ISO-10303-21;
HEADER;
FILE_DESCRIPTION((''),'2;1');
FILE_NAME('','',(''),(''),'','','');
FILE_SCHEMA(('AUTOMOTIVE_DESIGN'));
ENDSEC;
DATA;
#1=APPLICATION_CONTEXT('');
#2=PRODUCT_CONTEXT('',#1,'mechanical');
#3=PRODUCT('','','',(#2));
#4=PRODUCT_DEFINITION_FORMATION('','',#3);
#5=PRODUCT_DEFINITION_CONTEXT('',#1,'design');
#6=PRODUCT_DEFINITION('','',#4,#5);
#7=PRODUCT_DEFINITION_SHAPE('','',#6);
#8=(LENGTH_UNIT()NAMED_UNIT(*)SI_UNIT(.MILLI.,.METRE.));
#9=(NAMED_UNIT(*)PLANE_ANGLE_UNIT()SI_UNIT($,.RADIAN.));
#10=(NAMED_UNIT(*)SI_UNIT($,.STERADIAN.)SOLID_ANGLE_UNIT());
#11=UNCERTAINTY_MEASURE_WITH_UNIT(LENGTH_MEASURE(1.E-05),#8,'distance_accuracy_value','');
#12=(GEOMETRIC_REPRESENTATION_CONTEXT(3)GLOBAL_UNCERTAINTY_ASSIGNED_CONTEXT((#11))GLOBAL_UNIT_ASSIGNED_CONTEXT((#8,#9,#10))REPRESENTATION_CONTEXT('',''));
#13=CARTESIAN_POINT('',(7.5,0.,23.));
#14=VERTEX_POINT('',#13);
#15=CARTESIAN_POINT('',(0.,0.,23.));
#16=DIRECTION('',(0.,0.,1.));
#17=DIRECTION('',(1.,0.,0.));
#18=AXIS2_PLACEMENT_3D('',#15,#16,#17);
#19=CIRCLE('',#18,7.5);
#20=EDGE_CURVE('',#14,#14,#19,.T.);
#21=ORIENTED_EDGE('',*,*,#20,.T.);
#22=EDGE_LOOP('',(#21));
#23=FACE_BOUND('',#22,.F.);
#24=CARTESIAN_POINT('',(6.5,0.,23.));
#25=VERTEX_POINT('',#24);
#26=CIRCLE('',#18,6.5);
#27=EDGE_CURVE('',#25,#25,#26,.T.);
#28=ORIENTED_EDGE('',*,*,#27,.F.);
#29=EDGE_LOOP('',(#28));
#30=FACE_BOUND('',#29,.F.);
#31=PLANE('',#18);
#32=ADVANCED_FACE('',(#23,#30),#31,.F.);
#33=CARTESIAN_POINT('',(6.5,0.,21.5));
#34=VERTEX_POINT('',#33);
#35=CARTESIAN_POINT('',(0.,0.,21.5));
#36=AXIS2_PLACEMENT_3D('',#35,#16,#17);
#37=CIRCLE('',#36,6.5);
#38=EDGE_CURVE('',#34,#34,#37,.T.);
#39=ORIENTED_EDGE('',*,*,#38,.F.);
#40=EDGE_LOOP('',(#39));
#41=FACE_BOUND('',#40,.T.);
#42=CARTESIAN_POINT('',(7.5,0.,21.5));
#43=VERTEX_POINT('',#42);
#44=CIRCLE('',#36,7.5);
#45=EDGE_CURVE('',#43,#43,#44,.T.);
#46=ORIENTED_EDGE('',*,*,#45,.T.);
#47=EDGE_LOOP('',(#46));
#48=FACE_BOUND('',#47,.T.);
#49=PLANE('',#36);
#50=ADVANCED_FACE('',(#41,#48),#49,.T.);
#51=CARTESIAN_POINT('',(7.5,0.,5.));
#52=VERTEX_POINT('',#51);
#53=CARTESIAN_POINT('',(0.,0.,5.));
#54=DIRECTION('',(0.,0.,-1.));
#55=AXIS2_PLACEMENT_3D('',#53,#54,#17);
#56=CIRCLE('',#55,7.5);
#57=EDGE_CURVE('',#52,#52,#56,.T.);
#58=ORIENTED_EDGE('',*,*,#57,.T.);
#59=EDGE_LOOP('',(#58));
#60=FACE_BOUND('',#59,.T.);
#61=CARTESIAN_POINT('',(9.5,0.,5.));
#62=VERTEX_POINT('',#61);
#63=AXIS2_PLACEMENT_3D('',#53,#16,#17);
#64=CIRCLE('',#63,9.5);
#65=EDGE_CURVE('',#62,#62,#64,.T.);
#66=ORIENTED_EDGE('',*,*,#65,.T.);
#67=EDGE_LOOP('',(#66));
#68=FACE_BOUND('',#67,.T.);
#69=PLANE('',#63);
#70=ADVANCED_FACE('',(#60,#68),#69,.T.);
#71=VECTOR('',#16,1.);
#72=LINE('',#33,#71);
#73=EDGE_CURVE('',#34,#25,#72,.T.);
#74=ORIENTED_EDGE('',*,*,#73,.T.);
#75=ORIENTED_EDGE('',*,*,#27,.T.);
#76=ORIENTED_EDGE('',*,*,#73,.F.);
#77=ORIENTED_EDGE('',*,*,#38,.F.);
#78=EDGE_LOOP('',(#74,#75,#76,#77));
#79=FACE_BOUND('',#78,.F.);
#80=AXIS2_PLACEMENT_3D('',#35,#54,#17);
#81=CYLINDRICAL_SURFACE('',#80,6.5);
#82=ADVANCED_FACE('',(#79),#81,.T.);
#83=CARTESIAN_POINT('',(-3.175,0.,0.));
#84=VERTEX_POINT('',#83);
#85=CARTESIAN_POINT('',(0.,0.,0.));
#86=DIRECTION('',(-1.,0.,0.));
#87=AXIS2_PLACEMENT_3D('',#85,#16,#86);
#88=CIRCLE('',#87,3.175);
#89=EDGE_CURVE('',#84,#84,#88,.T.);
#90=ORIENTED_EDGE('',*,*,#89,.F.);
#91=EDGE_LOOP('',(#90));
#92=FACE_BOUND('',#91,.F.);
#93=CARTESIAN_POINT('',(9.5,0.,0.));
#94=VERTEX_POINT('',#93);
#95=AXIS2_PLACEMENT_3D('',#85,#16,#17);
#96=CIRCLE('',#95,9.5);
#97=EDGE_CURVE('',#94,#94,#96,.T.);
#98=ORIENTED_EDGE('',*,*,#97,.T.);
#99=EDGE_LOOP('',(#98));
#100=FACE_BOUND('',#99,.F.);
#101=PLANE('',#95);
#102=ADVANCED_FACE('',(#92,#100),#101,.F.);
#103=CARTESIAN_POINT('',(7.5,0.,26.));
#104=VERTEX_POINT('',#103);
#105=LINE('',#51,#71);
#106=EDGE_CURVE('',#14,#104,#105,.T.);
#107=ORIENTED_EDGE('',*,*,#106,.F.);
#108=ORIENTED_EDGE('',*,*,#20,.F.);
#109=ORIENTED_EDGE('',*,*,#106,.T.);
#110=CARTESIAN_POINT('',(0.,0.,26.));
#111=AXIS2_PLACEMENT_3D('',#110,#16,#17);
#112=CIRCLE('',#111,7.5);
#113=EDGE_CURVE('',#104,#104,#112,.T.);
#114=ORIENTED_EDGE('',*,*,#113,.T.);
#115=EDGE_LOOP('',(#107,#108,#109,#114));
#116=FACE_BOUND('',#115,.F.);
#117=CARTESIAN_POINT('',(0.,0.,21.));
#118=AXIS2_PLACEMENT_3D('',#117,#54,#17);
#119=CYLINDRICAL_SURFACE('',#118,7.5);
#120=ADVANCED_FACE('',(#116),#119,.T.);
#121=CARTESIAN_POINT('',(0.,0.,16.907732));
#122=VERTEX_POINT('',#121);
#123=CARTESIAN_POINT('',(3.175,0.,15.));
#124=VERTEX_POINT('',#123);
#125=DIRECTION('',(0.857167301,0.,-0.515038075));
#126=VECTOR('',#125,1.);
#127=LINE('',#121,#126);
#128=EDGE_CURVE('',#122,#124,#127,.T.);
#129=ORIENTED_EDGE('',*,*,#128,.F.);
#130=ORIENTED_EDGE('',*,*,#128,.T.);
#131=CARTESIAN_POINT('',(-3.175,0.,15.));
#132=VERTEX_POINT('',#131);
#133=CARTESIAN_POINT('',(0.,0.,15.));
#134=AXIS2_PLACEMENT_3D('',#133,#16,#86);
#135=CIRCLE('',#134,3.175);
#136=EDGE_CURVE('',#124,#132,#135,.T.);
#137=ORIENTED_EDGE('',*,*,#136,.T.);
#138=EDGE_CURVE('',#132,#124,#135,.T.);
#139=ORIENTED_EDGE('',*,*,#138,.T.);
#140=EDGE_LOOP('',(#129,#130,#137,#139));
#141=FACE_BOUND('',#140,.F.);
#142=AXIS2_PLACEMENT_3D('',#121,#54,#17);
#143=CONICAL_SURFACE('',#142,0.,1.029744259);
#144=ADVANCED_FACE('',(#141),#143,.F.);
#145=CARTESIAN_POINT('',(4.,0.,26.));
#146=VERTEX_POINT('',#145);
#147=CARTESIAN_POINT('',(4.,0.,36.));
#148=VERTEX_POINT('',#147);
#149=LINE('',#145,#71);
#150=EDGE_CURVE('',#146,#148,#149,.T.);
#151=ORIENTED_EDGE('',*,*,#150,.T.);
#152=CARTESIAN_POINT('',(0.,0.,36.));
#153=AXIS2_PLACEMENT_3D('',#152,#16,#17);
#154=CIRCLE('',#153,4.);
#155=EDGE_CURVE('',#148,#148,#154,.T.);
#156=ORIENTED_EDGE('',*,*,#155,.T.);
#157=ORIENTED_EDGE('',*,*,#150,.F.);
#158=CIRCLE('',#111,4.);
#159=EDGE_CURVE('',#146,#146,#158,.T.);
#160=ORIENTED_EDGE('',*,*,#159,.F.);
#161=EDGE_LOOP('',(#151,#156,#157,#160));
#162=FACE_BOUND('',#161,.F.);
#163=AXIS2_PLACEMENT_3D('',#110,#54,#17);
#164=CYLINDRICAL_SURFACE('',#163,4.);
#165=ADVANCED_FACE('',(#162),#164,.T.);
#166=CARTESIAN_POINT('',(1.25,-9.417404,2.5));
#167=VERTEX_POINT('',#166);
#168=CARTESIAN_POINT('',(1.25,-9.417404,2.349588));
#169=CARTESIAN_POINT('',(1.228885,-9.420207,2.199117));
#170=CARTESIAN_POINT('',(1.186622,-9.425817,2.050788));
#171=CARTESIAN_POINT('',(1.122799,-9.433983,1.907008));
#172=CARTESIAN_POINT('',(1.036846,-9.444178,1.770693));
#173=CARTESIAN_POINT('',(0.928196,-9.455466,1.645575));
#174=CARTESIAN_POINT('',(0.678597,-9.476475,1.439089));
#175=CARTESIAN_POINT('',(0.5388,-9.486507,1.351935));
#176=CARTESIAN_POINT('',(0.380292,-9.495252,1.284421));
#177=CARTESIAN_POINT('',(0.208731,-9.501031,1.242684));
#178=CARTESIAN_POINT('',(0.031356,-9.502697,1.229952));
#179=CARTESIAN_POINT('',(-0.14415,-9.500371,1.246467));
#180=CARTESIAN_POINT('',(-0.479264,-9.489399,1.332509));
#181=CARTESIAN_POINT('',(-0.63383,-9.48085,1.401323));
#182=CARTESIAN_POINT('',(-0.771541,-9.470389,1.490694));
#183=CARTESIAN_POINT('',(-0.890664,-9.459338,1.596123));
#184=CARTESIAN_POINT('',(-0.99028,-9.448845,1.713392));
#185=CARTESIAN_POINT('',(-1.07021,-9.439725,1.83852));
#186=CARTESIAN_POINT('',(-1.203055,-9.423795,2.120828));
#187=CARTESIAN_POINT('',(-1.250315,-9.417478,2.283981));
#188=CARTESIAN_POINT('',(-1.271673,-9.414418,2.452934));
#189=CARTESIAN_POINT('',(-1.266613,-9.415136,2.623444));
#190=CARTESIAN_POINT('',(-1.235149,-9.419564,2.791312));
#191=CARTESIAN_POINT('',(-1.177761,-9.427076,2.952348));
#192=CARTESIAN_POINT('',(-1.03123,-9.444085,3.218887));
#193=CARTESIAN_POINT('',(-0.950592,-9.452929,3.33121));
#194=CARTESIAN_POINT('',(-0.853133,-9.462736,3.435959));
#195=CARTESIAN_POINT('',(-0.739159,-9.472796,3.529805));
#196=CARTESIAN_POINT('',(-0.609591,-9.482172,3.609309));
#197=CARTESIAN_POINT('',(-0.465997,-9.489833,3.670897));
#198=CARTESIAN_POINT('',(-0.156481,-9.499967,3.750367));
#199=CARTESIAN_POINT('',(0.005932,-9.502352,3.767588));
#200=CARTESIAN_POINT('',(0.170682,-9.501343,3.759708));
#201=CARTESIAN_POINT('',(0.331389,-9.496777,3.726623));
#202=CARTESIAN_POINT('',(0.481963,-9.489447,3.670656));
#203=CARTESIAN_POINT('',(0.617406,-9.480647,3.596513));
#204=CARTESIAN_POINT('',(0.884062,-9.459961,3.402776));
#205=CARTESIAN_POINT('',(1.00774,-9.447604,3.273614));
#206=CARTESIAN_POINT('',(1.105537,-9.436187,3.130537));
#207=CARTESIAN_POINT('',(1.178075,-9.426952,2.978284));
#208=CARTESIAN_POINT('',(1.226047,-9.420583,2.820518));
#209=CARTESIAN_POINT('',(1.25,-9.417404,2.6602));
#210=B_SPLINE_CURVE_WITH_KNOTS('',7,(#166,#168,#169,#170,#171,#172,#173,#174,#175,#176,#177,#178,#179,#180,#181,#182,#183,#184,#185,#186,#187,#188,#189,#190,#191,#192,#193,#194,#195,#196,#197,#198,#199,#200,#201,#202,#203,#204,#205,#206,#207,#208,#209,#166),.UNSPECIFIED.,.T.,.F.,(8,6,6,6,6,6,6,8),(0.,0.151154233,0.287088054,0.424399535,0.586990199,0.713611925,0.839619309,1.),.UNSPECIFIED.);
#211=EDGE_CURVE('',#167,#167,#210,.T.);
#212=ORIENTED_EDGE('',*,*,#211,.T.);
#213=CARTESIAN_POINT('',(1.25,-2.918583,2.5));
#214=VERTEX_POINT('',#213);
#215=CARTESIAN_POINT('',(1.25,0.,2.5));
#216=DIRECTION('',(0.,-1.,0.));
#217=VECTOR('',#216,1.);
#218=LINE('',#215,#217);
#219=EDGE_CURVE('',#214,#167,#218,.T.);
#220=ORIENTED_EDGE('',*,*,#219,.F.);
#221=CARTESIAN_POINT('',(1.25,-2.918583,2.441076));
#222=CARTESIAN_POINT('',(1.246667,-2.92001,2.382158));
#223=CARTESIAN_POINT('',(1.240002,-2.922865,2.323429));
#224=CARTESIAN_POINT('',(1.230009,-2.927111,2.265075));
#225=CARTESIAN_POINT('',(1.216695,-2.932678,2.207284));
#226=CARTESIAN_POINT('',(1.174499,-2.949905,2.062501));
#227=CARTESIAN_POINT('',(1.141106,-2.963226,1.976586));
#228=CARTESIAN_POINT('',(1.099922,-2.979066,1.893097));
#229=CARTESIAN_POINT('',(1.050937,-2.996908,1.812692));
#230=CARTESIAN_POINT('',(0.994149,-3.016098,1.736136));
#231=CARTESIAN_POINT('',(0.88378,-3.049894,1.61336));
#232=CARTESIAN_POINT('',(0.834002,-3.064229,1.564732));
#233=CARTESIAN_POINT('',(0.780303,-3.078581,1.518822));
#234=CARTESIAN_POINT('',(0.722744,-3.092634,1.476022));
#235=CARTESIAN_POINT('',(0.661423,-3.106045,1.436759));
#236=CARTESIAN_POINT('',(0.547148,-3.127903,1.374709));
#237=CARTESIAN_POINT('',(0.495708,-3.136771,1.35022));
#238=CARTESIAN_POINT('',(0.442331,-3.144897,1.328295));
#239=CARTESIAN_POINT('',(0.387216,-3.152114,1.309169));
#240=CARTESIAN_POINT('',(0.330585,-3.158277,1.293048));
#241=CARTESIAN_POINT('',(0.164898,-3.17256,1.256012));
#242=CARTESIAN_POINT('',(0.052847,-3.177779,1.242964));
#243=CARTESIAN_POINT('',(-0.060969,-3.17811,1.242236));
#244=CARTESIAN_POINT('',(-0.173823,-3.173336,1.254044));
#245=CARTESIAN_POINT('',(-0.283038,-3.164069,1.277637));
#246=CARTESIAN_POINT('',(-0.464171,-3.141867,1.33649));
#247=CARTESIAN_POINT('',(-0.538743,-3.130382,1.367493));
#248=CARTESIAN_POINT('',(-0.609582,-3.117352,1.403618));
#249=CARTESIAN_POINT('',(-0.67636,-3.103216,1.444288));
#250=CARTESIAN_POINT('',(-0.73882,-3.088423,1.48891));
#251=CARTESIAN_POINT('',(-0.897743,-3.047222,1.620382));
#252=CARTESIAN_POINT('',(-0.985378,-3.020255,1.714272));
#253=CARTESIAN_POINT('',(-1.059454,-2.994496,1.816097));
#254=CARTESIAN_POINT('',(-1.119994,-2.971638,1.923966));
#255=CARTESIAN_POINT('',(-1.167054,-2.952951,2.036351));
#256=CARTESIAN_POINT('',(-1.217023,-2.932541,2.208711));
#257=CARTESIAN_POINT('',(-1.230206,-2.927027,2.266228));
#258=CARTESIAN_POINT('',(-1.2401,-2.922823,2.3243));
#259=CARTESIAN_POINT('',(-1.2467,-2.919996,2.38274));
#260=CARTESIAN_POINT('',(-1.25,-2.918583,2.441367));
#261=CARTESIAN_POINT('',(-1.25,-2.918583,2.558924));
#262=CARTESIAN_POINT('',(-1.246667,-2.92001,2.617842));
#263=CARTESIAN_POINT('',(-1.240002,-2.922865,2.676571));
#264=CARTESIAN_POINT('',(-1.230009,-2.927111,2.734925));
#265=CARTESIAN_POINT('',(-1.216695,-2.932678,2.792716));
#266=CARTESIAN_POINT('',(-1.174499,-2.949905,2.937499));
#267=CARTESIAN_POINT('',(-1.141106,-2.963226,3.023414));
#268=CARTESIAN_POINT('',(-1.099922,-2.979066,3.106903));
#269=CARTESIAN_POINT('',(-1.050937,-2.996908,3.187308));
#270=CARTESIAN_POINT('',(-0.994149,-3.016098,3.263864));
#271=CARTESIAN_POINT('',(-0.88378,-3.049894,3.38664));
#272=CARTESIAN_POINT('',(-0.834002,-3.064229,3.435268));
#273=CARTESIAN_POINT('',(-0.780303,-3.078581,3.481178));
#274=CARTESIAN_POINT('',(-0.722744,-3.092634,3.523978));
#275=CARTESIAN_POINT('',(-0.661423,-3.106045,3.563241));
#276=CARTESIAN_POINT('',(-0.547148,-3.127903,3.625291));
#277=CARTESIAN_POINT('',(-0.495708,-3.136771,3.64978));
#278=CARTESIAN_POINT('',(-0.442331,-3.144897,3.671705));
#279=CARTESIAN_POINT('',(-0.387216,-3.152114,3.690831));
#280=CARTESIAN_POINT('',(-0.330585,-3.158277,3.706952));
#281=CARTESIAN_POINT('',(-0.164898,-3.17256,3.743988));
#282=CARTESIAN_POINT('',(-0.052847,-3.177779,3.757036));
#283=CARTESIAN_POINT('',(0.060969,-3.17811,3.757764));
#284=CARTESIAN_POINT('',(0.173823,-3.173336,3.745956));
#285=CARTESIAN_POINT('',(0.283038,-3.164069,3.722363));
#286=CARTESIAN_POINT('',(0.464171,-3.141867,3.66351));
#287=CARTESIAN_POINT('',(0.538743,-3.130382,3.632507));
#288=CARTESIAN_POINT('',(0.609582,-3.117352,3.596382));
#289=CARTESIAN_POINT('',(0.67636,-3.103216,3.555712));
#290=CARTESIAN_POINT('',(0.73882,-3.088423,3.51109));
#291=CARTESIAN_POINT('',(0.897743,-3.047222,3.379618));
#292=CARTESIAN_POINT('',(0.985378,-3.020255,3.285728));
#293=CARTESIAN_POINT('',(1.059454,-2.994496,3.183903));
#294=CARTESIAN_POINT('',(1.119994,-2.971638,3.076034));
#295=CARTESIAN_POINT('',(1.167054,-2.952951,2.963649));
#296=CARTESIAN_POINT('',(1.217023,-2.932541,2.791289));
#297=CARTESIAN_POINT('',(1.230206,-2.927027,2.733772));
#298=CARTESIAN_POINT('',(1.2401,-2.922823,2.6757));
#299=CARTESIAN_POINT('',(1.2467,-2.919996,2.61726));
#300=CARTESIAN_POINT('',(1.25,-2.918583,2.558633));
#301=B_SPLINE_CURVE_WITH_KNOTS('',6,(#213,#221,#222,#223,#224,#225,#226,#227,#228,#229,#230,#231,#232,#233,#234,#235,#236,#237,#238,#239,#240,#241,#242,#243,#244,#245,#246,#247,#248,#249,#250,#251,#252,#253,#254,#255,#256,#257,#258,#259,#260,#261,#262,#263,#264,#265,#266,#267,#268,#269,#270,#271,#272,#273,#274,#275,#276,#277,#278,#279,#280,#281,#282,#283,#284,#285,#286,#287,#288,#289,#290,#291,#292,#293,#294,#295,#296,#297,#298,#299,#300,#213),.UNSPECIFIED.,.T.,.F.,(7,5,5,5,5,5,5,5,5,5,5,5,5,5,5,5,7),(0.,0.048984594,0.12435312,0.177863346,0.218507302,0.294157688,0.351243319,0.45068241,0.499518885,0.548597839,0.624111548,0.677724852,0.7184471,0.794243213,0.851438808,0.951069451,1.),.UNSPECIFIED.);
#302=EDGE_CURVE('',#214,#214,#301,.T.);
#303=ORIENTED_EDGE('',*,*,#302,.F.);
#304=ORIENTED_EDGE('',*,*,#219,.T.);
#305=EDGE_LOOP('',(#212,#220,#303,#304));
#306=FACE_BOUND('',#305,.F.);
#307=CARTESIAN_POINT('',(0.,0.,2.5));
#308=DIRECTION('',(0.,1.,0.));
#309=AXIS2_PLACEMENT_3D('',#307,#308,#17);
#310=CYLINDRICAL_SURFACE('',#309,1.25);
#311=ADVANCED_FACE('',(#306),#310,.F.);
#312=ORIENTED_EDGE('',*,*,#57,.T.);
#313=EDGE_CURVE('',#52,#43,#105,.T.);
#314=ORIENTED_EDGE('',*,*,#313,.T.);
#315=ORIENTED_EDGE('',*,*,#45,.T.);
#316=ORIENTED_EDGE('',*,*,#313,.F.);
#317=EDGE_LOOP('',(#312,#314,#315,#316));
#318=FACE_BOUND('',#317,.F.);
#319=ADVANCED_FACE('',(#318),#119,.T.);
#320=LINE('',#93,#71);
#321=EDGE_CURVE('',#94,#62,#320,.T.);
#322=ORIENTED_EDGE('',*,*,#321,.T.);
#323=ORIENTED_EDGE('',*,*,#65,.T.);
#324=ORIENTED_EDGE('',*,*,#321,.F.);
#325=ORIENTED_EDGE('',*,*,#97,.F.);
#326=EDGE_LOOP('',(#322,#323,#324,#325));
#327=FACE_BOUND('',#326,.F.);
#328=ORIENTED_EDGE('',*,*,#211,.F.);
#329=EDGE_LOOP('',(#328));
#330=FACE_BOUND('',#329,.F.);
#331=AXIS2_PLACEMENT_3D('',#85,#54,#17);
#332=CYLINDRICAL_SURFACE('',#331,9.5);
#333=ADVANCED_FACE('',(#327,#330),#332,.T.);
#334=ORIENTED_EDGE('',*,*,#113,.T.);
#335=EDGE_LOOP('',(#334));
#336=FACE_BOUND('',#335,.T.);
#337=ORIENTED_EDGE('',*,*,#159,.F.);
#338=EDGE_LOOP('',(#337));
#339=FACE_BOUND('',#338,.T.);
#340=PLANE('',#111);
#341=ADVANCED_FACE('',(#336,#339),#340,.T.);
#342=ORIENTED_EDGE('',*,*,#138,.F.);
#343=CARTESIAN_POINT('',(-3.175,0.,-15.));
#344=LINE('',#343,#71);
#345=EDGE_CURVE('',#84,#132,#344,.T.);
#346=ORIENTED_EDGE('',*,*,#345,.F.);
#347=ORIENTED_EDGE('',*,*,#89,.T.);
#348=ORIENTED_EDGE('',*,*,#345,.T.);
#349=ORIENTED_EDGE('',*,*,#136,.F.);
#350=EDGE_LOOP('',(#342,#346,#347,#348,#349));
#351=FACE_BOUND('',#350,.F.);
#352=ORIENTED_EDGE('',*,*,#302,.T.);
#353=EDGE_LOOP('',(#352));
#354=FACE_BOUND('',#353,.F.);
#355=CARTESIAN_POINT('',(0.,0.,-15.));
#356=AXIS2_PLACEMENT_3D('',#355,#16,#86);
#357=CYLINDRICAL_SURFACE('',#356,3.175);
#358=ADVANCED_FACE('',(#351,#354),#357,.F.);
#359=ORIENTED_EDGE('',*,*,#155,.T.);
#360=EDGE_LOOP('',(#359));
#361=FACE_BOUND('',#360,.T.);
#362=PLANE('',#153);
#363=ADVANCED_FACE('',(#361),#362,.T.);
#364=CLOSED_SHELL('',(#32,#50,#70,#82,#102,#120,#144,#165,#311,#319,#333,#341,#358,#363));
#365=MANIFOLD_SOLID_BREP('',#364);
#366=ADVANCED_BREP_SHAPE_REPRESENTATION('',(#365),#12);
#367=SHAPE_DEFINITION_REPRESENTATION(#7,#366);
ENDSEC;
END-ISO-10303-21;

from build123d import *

# Parameters (mm, degrees)
F0_R      = 7.5
F1_DEPTH  = 21
F2_R      = 9.5
F3_DEPTH  = 5
F5_D      = 6.35
F5_DEPTH  = 15
F5_TIP    = 1.9077324654
F7_D      = 2.5
F7_DEPTH  = 9.501
F8_R      = 7.5
F9_DEPTH  = 5
F10_R     = 4
F11_DEPTH = 10
F13_R     = 7.5
F13_R_2   = 6.5
F14_DEPTH = 1.5


with BuildPart() as f1:
    # F0 (on Top) → F1 (new body)
    with BuildSketch(Plane.XY):
        Circle(F0_R)
    extrude(amount=F1_DEPTH)

    # F2 (on Top) → F3 (join)
    with BuildSketch(Plane.XY):
        Circle(F2_R)
    extrude(amount=F3_DEPTH)

    # F5
    with Locations(Plane(origin=(0, 0, 0), x_dir=(1, 0, 0), z_dir=(0, 0, -1))):
        with Locations((0, 0)):
            Hole(F5_D / 2, depth=F5_DEPTH)
            with Locations((0, 0, -(F5_DEPTH + F5_TIP / 2))):  # 118° drill point
                Cone(0, F5_D / 2, F5_TIP, mode=Mode.SUBTRACT)

    # F7 (through all, one way)
    with BuildSketch(Plane(origin=(0, 0, 0), x_dir=(1, 0, 0), z_dir=(0, 1, 0))):
        with Locations((0, -2.5)):
            Circle(F7_D / 2)
    extrude(amount=-F7_DEPTH, mode=Mode.SUBTRACT)

    # F8 (on face) → F9 (join)
    with BuildSketch(Plane.XY.offset(21)):
        Circle(F8_R)
    extrude(amount=F9_DEPTH)

    # F10 (on face) → F11 (join)
    with BuildSketch(Plane.XY.offset(26)):
        Circle(F10_R)
    extrude(amount=F11_DEPTH)

    # F13 (on offset) → F14 (cut)
    with BuildSketch(Plane.XY.offset(21.5)):
        Circle(F13_R)
        Circle(F13_R_2, mode=Mode.SUBTRACT)
    extrude(amount=F14_DEPTH, mode=Mode.SUBTRACT)


solid = f1.part
